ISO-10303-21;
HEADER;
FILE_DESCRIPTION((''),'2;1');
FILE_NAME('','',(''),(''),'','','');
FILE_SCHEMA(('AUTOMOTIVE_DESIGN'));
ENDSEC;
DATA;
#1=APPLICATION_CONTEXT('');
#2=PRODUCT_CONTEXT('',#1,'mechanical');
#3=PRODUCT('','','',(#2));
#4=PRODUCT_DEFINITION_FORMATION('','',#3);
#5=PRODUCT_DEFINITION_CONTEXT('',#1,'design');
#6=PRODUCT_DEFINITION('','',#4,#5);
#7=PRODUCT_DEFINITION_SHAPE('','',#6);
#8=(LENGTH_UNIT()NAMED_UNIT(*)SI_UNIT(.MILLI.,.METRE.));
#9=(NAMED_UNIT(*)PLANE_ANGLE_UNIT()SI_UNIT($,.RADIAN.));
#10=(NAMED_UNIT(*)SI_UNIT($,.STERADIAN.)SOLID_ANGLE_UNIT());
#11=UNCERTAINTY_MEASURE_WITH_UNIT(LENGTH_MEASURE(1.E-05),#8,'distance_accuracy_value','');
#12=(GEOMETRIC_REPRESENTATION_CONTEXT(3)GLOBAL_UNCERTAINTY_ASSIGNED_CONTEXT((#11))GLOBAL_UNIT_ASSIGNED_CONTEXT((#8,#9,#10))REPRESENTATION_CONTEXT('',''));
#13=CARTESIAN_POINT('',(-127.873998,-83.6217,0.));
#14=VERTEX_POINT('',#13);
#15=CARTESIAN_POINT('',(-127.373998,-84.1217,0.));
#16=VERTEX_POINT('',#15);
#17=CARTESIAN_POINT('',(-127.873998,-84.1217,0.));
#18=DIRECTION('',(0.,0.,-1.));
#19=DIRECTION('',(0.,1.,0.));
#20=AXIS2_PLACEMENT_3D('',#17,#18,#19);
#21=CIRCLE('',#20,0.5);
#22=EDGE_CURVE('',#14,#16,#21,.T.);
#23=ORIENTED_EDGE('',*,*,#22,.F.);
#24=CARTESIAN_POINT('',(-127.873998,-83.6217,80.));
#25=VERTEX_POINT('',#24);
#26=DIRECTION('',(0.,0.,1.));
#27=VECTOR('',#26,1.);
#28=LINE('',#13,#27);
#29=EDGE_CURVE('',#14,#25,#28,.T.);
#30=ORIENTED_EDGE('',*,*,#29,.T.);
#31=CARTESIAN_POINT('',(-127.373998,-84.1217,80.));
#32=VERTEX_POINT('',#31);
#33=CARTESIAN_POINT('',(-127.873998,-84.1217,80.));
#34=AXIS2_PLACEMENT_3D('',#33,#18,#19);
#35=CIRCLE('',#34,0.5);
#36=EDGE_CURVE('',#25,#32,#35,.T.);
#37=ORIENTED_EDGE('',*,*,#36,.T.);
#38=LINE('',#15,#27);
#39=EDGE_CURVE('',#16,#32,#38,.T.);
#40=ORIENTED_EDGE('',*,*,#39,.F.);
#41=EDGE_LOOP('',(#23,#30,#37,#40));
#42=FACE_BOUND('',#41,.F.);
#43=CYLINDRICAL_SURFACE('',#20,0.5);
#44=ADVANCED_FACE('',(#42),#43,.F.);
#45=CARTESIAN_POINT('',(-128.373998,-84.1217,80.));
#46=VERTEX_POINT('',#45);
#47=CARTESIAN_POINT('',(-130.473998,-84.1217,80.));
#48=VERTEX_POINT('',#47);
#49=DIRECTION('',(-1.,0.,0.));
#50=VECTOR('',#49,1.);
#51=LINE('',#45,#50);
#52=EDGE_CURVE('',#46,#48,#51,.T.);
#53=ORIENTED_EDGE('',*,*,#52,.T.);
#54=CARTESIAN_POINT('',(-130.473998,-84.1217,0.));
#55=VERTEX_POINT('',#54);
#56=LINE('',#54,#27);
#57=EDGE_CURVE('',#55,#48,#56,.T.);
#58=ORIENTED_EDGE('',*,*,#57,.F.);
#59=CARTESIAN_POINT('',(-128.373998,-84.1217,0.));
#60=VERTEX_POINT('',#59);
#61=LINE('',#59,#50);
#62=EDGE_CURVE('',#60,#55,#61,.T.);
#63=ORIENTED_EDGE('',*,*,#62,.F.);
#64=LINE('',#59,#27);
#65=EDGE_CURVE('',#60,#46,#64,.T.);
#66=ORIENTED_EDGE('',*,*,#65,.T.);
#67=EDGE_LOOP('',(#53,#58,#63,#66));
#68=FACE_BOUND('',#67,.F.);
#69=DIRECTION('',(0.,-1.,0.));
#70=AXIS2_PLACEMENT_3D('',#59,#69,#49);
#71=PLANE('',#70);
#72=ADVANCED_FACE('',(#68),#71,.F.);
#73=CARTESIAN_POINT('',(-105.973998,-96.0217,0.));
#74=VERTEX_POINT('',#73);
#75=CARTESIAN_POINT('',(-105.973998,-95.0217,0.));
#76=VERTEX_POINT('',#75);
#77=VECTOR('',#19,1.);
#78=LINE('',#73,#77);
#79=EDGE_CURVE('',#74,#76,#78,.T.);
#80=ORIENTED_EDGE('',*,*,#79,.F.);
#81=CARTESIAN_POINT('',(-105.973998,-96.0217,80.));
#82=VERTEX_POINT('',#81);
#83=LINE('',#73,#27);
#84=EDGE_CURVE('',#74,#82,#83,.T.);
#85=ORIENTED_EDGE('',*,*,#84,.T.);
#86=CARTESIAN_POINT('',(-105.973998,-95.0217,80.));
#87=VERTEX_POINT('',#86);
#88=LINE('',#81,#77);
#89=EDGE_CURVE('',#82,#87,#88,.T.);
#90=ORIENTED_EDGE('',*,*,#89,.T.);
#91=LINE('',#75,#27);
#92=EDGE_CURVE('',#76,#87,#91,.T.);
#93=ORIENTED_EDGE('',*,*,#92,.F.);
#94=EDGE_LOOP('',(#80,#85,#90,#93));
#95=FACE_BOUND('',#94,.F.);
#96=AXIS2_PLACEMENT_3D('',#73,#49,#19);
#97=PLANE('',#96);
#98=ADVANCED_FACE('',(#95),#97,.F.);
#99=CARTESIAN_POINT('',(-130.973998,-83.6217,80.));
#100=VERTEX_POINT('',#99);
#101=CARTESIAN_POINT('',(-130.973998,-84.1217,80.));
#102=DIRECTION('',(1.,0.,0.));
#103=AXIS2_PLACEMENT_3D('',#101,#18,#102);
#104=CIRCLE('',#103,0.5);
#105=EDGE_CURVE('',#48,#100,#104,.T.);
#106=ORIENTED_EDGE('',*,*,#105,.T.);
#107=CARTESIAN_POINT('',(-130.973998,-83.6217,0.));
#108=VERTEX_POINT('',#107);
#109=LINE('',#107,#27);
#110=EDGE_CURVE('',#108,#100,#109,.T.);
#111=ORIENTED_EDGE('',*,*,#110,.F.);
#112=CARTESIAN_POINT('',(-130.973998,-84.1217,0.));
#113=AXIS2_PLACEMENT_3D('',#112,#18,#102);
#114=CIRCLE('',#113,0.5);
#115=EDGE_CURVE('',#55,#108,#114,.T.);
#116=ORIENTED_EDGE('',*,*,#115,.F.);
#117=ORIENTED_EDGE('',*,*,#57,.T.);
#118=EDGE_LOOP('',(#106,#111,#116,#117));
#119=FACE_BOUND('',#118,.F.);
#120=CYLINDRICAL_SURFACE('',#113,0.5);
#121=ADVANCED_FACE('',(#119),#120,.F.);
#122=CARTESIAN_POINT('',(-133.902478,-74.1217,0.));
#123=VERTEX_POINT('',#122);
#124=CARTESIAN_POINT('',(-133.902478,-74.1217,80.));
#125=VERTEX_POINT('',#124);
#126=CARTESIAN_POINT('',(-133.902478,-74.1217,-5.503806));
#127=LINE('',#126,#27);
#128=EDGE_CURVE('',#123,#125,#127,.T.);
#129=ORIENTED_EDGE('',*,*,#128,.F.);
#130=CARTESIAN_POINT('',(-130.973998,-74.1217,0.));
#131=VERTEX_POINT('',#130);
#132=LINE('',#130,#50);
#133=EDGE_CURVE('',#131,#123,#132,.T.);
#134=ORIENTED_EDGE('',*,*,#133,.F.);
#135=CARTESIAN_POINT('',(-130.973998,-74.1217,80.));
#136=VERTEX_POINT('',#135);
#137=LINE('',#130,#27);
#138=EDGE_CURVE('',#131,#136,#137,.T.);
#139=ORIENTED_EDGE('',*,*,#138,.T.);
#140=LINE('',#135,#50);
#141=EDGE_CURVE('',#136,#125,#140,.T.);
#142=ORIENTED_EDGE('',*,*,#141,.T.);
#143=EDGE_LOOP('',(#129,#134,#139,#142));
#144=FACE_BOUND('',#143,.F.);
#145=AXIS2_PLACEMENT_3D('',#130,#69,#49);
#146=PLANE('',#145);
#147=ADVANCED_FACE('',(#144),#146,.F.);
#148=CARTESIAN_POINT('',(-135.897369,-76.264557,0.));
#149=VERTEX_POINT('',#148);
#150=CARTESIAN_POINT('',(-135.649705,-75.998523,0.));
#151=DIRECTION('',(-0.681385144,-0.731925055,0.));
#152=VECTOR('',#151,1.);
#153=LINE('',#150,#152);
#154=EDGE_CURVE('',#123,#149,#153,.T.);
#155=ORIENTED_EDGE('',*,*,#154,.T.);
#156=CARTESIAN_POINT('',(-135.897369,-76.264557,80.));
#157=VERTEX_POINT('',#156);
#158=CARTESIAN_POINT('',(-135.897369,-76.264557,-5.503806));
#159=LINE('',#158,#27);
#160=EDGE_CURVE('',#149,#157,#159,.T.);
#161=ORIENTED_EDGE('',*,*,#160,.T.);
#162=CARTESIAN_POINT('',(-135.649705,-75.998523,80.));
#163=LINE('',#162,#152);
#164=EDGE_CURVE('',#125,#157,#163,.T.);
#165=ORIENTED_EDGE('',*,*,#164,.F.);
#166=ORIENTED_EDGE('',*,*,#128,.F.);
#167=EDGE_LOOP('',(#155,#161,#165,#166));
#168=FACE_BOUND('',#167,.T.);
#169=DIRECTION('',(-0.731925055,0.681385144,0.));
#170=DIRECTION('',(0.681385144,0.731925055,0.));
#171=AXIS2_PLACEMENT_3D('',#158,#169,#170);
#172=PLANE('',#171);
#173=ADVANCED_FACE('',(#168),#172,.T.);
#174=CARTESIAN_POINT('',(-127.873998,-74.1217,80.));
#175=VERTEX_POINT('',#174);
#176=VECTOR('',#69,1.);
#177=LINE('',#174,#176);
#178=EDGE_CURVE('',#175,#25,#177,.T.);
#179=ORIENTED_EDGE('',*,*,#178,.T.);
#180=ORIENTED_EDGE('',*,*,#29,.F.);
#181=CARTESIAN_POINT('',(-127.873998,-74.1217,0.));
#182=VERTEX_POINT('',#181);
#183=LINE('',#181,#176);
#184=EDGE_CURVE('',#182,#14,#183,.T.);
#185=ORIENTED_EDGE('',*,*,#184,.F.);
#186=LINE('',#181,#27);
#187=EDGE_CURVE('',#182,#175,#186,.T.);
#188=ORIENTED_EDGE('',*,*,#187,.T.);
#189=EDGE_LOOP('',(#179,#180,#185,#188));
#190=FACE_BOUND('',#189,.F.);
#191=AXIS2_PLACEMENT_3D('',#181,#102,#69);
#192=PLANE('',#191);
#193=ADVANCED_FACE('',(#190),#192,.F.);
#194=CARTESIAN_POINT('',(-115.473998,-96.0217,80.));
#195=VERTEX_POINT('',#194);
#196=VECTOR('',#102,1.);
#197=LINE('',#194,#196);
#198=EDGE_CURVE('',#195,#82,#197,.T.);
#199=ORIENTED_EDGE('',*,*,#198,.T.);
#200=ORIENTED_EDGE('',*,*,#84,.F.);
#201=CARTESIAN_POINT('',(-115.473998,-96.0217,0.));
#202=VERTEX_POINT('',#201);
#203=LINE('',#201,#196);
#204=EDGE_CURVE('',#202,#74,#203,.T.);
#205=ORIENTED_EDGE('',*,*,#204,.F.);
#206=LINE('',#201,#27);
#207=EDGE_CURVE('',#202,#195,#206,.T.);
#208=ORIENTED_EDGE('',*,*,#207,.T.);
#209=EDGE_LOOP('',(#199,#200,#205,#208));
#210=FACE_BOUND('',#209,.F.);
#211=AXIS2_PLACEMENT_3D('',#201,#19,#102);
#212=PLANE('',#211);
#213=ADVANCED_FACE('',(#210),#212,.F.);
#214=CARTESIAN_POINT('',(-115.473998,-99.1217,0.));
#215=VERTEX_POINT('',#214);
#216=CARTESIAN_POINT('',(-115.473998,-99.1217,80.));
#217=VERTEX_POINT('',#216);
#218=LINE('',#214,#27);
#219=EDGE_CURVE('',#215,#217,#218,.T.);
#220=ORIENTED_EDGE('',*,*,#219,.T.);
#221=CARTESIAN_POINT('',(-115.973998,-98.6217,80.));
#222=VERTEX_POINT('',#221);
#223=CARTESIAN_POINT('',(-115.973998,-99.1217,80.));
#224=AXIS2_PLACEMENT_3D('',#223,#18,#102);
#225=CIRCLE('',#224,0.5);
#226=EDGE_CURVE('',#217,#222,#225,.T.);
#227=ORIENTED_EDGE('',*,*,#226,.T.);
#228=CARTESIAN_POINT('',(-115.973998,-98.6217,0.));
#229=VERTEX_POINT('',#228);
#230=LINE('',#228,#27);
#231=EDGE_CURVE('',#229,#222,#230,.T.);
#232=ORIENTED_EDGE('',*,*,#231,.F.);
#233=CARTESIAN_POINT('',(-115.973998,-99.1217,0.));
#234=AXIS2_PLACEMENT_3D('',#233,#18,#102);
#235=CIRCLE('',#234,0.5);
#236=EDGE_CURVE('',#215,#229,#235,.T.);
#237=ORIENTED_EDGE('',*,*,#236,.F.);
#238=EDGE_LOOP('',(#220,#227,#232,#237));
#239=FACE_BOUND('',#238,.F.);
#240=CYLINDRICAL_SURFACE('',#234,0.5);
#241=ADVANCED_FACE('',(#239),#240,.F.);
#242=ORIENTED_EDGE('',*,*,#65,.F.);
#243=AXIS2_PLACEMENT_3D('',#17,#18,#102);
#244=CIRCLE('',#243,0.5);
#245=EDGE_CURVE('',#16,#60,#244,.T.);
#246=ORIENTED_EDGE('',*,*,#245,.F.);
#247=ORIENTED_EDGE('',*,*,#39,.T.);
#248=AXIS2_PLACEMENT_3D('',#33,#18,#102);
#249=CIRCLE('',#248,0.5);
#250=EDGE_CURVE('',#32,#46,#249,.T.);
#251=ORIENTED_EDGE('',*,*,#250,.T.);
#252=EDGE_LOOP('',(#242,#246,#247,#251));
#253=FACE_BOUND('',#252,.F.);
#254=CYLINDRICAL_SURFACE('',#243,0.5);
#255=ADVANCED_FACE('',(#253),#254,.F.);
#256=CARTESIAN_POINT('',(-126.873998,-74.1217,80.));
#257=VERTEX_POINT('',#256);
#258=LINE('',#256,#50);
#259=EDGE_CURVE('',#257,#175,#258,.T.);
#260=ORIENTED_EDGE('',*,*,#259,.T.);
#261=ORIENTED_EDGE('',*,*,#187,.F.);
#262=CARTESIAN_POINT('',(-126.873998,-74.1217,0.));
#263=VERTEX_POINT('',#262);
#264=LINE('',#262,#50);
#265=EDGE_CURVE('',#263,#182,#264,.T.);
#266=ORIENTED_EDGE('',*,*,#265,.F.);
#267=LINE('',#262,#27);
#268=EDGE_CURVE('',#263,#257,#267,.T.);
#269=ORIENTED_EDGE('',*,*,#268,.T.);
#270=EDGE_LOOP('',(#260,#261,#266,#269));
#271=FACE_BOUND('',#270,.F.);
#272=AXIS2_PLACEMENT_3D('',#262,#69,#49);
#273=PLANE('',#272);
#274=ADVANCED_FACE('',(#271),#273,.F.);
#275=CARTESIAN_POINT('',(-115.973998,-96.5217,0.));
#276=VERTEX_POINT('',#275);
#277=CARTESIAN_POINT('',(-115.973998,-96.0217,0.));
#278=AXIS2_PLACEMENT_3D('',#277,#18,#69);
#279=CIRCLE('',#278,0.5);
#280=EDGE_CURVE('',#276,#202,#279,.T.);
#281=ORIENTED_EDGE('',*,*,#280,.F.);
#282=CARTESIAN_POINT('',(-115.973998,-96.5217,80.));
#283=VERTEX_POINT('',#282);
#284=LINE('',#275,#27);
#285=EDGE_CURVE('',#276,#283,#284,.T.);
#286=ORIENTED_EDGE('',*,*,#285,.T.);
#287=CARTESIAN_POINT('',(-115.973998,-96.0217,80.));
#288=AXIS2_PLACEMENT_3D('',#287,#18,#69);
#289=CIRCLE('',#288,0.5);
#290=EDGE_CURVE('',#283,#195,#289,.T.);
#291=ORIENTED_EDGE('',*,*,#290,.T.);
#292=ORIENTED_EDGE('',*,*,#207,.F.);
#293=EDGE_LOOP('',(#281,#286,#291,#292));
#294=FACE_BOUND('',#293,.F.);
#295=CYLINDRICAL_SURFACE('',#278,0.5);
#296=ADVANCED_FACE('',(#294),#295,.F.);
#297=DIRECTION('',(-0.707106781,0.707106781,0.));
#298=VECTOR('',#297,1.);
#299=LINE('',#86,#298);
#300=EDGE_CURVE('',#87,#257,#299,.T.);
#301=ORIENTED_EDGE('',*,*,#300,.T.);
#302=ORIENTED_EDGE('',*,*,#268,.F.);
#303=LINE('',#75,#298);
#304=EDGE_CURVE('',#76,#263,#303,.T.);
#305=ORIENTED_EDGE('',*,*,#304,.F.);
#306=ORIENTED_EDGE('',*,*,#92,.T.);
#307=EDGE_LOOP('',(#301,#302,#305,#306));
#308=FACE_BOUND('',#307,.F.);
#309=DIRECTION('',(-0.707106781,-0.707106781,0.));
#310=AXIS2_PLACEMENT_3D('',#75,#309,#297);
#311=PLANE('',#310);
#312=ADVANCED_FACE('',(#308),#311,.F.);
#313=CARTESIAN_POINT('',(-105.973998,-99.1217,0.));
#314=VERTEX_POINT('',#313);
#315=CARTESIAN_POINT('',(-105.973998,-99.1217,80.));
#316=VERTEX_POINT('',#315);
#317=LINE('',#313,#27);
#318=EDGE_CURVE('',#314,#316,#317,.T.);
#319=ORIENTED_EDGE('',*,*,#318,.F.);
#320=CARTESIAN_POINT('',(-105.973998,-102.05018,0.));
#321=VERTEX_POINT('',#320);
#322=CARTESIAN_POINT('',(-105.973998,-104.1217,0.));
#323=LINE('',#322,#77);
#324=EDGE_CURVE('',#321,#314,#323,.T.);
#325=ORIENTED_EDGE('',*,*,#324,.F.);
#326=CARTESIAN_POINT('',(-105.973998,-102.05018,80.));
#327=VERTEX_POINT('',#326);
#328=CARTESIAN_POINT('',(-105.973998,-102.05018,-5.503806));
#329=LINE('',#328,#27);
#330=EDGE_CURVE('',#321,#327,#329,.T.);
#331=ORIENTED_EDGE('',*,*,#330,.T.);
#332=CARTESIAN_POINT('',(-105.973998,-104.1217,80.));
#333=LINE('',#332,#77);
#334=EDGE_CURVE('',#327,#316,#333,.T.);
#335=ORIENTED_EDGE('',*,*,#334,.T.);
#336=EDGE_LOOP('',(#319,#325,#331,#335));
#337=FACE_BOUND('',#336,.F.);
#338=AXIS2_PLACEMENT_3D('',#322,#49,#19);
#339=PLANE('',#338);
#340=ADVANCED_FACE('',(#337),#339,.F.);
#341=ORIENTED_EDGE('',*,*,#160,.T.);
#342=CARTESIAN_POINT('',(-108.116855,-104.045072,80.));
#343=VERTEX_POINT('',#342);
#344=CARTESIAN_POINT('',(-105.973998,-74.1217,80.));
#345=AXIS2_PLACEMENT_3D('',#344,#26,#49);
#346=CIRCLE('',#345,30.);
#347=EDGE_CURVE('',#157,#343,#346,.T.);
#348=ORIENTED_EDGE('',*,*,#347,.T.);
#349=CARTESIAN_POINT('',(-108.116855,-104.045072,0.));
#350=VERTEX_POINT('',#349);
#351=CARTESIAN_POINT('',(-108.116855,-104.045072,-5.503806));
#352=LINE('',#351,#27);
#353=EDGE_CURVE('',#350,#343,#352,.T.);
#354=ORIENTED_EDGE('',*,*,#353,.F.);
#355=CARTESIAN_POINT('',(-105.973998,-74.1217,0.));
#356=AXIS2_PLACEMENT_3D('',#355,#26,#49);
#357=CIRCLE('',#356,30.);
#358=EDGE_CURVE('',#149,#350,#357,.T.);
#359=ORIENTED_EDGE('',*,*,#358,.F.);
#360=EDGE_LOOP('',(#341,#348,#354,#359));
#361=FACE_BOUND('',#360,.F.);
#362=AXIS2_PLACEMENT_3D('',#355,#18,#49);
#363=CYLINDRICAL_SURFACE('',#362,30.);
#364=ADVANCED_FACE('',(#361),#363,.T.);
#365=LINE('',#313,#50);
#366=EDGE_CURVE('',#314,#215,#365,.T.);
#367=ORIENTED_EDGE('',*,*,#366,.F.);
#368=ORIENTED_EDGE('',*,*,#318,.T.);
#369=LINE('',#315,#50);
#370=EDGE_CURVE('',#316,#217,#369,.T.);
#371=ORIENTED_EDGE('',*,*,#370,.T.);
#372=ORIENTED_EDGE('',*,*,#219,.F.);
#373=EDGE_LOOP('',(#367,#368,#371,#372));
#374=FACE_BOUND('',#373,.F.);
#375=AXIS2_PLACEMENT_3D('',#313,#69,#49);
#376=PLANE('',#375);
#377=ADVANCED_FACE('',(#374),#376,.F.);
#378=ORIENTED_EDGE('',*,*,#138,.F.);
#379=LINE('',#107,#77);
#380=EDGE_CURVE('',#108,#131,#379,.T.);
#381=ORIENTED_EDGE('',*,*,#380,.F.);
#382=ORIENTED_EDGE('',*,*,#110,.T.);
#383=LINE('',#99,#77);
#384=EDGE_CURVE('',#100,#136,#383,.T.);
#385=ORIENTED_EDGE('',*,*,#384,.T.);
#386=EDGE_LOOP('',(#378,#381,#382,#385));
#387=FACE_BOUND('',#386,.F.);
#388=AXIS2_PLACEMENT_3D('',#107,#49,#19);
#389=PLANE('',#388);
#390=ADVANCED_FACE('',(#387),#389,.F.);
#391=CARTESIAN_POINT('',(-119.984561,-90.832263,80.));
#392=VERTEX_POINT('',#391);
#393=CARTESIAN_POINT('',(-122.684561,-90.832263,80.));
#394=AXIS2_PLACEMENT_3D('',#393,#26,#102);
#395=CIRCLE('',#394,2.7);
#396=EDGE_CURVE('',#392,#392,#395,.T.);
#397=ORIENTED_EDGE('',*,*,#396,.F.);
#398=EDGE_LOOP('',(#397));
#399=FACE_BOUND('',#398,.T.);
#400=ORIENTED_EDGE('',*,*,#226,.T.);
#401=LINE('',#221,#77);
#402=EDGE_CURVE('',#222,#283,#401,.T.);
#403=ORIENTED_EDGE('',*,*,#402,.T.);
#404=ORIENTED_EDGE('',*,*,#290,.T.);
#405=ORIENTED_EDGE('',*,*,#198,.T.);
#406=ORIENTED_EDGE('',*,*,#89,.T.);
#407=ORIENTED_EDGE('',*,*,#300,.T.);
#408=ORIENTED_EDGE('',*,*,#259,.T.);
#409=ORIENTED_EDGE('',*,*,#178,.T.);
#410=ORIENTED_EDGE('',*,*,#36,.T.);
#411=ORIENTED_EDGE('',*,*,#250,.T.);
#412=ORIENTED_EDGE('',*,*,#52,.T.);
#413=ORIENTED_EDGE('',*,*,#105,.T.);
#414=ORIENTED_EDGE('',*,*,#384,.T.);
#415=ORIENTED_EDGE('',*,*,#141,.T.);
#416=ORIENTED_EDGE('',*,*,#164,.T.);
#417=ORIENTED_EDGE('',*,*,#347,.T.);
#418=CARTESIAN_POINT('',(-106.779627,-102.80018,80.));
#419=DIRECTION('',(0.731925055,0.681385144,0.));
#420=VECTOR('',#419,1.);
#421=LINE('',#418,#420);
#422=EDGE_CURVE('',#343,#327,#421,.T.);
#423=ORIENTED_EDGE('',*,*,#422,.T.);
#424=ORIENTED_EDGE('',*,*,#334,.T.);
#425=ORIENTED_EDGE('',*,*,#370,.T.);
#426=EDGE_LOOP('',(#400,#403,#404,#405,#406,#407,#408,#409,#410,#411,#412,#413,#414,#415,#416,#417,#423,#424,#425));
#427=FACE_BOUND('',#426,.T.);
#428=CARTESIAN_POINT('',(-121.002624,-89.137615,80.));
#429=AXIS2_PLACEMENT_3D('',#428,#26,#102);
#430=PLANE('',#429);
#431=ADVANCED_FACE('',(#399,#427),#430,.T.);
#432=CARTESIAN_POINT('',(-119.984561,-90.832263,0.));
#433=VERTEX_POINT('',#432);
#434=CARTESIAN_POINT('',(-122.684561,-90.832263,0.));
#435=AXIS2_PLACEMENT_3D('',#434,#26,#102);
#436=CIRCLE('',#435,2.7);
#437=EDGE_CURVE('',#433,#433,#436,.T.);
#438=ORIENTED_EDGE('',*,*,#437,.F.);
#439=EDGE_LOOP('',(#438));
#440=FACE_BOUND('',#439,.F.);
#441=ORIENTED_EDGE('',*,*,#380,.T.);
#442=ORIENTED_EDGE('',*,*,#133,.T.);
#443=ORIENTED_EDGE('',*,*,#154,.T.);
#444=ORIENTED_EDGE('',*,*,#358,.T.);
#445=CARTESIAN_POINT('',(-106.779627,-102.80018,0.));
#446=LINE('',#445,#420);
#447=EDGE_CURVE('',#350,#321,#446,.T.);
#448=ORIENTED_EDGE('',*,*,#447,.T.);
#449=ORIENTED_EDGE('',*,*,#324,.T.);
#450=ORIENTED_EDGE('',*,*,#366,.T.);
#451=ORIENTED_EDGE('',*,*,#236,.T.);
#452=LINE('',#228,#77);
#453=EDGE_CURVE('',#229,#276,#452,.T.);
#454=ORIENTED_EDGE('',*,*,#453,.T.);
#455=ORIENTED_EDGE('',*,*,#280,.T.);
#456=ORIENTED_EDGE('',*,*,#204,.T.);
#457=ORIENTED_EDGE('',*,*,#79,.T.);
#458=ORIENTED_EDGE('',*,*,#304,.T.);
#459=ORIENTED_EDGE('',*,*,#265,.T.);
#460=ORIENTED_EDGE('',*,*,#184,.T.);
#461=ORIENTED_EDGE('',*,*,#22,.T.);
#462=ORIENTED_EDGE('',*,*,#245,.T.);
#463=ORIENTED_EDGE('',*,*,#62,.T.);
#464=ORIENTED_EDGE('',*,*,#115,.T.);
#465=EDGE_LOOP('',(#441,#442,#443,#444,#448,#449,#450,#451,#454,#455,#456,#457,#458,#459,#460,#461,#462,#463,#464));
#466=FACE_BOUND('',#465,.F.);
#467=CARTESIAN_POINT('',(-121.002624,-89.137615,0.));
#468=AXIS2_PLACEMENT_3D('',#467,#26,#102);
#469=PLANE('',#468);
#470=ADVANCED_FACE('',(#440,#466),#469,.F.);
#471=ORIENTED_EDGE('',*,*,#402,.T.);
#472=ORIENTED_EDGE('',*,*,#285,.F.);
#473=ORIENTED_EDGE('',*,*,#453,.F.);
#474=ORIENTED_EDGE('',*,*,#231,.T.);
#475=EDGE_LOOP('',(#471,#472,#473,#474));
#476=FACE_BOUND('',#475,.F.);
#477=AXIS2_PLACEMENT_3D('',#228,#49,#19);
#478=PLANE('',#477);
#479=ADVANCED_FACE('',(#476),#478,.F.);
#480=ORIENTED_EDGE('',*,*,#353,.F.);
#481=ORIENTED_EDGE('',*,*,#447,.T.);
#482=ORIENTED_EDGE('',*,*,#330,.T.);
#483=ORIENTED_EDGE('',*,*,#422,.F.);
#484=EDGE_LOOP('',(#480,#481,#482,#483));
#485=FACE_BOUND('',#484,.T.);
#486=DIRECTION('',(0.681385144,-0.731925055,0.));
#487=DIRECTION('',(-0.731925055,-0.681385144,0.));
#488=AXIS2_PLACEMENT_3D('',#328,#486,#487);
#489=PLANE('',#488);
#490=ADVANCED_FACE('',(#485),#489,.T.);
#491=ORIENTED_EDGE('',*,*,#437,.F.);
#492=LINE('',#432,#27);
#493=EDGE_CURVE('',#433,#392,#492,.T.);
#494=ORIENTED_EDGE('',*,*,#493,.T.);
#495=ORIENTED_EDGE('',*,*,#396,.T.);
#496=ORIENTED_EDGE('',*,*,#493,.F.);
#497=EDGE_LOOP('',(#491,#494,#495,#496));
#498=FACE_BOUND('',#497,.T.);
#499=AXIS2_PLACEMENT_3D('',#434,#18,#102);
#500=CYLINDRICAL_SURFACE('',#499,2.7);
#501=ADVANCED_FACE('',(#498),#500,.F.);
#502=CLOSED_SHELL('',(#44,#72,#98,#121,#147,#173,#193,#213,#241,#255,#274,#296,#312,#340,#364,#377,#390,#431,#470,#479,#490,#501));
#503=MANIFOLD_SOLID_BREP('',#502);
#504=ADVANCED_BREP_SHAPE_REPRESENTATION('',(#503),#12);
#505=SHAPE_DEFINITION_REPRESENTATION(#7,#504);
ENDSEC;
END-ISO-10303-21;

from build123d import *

# Parameters (mm, degrees)
F0_R        = 2.7
F1_DEPTH    = 80
F2_T1_DEPTH = 91.0076112648


# Not quite as in the source:
# - a fillet or chamfer that OpenCascade refuses, or shapes differently, is made with other operations: its cross-section is extruded or revolved along the edge and cut away or added


with BuildPart() as f1:
    # F0 (on Top) → F1 (new body)
    with BuildSketch(Plane.XY):
        with BuildLine():
            Line((-130.9739977717, -74.1217002273), (-135.9739977717, -74.1217002273))
            ThreePointArc((-135.9739977717, -74.1217002273), (-127.1872012073, -95.3349036629), (-105.9739977717, -104.1217002273))
            Line((-105.9739977717, -104.1217002273), (-105.9739977717, -99.1217002273))
            Line((-105.9739977717, -99.1217002273), (-115.4739977717, -99.1217002273))
            ThreePointArc((-115.4739977717, -99.1217002273), (-116.3275511623, -99.4752536179), (-115.9739977717, -98.6217002273))
            Line((-115.9739977717, -98.6217002273), (-115.9739977717, -96.5217002273))
            ThreePointArc((-115.9739977717, -96.5217002273), (-116.3275511623, -95.6681468367), (-115.4739977717, -96.0217002273))
            Line((-115.4739977717, -96.0217002273), (-105.9739977717, -96.0217002273))
            Line((-105.9739977717, -96.0217002273), (-105.9739977717, -95.0217002273))
            Line((-105.9739977717, -95.0217002273), (-126.8739977717, -74.1217002273))
            Line((-126.8739977717, -74.1217002273), (-127.8739977717, -74.1217002273))
            Line((-127.8739977717, -74.1217002273), (-127.8739977717, -83.6217002273))
            ThreePointArc((-127.8739977717, -83.6217002273), (-127.5204443811, -83.7681468367), (-127.3739977717, -84.1217002273))
            ThreePointArc((-127.3739977717, -84.1217002273), (-127.8739977717, -84.6217002273), (-128.3739977717, -84.1217002273))
            Line((-128.3739977717, -84.1217002273), (-130.4739977717, -84.1217002273))
            ThreePointArc((-130.4739977717, -84.1217002273), (-131.3275511623, -84.4752536179), (-130.9739977717, -83.6217002273))
            Line((-130.9739977717, -83.6217002273), (-130.9739977717, -74.1217002273))
        make_face()
        with Locations((-122.684560746, -90.8322632015)):
            Circle(F0_R, mode=Mode.SUBTRACT)
    extrude(amount=F1_DEPTH)

    # F2: chamfer of 2 on 2 edges, made by hand

    # F2_s2 → F2_t1 (cut)
    with BuildSketch(Plane.XY.offset(-5.5038056324)):
        with BuildLine():
            Line((-105.9739977717, -102.0501803148), (-108.1168549146, -104.0450717496))
            ThreePointArc((-108.1168549146, -104.0450717496), (-107.074368306, -104.1015131801), (-105.9739977717, -104.1217002273))
            Line((-105.9739977717, -104.1217002273), (-105.9739977717, -102.0501803148))
        make_face()
        with BuildLine():
            Line((-135.8973692941, -76.2645573701), (-133.9024778593, -74.1217002273))
            Line((-133.9024778593, -74.1217002273), (-135.9739977717, -74.1217002273))
            ThreePointArc((-135.9739977717, -74.1217002273), (-135.9538107246, -75.2220707615), (-135.8973692941, -76.2645573701))
        make_face()
    extrude(amount=F2_T1_DEPTH, mode=Mode.SUBTRACT)


solid = f1.part
